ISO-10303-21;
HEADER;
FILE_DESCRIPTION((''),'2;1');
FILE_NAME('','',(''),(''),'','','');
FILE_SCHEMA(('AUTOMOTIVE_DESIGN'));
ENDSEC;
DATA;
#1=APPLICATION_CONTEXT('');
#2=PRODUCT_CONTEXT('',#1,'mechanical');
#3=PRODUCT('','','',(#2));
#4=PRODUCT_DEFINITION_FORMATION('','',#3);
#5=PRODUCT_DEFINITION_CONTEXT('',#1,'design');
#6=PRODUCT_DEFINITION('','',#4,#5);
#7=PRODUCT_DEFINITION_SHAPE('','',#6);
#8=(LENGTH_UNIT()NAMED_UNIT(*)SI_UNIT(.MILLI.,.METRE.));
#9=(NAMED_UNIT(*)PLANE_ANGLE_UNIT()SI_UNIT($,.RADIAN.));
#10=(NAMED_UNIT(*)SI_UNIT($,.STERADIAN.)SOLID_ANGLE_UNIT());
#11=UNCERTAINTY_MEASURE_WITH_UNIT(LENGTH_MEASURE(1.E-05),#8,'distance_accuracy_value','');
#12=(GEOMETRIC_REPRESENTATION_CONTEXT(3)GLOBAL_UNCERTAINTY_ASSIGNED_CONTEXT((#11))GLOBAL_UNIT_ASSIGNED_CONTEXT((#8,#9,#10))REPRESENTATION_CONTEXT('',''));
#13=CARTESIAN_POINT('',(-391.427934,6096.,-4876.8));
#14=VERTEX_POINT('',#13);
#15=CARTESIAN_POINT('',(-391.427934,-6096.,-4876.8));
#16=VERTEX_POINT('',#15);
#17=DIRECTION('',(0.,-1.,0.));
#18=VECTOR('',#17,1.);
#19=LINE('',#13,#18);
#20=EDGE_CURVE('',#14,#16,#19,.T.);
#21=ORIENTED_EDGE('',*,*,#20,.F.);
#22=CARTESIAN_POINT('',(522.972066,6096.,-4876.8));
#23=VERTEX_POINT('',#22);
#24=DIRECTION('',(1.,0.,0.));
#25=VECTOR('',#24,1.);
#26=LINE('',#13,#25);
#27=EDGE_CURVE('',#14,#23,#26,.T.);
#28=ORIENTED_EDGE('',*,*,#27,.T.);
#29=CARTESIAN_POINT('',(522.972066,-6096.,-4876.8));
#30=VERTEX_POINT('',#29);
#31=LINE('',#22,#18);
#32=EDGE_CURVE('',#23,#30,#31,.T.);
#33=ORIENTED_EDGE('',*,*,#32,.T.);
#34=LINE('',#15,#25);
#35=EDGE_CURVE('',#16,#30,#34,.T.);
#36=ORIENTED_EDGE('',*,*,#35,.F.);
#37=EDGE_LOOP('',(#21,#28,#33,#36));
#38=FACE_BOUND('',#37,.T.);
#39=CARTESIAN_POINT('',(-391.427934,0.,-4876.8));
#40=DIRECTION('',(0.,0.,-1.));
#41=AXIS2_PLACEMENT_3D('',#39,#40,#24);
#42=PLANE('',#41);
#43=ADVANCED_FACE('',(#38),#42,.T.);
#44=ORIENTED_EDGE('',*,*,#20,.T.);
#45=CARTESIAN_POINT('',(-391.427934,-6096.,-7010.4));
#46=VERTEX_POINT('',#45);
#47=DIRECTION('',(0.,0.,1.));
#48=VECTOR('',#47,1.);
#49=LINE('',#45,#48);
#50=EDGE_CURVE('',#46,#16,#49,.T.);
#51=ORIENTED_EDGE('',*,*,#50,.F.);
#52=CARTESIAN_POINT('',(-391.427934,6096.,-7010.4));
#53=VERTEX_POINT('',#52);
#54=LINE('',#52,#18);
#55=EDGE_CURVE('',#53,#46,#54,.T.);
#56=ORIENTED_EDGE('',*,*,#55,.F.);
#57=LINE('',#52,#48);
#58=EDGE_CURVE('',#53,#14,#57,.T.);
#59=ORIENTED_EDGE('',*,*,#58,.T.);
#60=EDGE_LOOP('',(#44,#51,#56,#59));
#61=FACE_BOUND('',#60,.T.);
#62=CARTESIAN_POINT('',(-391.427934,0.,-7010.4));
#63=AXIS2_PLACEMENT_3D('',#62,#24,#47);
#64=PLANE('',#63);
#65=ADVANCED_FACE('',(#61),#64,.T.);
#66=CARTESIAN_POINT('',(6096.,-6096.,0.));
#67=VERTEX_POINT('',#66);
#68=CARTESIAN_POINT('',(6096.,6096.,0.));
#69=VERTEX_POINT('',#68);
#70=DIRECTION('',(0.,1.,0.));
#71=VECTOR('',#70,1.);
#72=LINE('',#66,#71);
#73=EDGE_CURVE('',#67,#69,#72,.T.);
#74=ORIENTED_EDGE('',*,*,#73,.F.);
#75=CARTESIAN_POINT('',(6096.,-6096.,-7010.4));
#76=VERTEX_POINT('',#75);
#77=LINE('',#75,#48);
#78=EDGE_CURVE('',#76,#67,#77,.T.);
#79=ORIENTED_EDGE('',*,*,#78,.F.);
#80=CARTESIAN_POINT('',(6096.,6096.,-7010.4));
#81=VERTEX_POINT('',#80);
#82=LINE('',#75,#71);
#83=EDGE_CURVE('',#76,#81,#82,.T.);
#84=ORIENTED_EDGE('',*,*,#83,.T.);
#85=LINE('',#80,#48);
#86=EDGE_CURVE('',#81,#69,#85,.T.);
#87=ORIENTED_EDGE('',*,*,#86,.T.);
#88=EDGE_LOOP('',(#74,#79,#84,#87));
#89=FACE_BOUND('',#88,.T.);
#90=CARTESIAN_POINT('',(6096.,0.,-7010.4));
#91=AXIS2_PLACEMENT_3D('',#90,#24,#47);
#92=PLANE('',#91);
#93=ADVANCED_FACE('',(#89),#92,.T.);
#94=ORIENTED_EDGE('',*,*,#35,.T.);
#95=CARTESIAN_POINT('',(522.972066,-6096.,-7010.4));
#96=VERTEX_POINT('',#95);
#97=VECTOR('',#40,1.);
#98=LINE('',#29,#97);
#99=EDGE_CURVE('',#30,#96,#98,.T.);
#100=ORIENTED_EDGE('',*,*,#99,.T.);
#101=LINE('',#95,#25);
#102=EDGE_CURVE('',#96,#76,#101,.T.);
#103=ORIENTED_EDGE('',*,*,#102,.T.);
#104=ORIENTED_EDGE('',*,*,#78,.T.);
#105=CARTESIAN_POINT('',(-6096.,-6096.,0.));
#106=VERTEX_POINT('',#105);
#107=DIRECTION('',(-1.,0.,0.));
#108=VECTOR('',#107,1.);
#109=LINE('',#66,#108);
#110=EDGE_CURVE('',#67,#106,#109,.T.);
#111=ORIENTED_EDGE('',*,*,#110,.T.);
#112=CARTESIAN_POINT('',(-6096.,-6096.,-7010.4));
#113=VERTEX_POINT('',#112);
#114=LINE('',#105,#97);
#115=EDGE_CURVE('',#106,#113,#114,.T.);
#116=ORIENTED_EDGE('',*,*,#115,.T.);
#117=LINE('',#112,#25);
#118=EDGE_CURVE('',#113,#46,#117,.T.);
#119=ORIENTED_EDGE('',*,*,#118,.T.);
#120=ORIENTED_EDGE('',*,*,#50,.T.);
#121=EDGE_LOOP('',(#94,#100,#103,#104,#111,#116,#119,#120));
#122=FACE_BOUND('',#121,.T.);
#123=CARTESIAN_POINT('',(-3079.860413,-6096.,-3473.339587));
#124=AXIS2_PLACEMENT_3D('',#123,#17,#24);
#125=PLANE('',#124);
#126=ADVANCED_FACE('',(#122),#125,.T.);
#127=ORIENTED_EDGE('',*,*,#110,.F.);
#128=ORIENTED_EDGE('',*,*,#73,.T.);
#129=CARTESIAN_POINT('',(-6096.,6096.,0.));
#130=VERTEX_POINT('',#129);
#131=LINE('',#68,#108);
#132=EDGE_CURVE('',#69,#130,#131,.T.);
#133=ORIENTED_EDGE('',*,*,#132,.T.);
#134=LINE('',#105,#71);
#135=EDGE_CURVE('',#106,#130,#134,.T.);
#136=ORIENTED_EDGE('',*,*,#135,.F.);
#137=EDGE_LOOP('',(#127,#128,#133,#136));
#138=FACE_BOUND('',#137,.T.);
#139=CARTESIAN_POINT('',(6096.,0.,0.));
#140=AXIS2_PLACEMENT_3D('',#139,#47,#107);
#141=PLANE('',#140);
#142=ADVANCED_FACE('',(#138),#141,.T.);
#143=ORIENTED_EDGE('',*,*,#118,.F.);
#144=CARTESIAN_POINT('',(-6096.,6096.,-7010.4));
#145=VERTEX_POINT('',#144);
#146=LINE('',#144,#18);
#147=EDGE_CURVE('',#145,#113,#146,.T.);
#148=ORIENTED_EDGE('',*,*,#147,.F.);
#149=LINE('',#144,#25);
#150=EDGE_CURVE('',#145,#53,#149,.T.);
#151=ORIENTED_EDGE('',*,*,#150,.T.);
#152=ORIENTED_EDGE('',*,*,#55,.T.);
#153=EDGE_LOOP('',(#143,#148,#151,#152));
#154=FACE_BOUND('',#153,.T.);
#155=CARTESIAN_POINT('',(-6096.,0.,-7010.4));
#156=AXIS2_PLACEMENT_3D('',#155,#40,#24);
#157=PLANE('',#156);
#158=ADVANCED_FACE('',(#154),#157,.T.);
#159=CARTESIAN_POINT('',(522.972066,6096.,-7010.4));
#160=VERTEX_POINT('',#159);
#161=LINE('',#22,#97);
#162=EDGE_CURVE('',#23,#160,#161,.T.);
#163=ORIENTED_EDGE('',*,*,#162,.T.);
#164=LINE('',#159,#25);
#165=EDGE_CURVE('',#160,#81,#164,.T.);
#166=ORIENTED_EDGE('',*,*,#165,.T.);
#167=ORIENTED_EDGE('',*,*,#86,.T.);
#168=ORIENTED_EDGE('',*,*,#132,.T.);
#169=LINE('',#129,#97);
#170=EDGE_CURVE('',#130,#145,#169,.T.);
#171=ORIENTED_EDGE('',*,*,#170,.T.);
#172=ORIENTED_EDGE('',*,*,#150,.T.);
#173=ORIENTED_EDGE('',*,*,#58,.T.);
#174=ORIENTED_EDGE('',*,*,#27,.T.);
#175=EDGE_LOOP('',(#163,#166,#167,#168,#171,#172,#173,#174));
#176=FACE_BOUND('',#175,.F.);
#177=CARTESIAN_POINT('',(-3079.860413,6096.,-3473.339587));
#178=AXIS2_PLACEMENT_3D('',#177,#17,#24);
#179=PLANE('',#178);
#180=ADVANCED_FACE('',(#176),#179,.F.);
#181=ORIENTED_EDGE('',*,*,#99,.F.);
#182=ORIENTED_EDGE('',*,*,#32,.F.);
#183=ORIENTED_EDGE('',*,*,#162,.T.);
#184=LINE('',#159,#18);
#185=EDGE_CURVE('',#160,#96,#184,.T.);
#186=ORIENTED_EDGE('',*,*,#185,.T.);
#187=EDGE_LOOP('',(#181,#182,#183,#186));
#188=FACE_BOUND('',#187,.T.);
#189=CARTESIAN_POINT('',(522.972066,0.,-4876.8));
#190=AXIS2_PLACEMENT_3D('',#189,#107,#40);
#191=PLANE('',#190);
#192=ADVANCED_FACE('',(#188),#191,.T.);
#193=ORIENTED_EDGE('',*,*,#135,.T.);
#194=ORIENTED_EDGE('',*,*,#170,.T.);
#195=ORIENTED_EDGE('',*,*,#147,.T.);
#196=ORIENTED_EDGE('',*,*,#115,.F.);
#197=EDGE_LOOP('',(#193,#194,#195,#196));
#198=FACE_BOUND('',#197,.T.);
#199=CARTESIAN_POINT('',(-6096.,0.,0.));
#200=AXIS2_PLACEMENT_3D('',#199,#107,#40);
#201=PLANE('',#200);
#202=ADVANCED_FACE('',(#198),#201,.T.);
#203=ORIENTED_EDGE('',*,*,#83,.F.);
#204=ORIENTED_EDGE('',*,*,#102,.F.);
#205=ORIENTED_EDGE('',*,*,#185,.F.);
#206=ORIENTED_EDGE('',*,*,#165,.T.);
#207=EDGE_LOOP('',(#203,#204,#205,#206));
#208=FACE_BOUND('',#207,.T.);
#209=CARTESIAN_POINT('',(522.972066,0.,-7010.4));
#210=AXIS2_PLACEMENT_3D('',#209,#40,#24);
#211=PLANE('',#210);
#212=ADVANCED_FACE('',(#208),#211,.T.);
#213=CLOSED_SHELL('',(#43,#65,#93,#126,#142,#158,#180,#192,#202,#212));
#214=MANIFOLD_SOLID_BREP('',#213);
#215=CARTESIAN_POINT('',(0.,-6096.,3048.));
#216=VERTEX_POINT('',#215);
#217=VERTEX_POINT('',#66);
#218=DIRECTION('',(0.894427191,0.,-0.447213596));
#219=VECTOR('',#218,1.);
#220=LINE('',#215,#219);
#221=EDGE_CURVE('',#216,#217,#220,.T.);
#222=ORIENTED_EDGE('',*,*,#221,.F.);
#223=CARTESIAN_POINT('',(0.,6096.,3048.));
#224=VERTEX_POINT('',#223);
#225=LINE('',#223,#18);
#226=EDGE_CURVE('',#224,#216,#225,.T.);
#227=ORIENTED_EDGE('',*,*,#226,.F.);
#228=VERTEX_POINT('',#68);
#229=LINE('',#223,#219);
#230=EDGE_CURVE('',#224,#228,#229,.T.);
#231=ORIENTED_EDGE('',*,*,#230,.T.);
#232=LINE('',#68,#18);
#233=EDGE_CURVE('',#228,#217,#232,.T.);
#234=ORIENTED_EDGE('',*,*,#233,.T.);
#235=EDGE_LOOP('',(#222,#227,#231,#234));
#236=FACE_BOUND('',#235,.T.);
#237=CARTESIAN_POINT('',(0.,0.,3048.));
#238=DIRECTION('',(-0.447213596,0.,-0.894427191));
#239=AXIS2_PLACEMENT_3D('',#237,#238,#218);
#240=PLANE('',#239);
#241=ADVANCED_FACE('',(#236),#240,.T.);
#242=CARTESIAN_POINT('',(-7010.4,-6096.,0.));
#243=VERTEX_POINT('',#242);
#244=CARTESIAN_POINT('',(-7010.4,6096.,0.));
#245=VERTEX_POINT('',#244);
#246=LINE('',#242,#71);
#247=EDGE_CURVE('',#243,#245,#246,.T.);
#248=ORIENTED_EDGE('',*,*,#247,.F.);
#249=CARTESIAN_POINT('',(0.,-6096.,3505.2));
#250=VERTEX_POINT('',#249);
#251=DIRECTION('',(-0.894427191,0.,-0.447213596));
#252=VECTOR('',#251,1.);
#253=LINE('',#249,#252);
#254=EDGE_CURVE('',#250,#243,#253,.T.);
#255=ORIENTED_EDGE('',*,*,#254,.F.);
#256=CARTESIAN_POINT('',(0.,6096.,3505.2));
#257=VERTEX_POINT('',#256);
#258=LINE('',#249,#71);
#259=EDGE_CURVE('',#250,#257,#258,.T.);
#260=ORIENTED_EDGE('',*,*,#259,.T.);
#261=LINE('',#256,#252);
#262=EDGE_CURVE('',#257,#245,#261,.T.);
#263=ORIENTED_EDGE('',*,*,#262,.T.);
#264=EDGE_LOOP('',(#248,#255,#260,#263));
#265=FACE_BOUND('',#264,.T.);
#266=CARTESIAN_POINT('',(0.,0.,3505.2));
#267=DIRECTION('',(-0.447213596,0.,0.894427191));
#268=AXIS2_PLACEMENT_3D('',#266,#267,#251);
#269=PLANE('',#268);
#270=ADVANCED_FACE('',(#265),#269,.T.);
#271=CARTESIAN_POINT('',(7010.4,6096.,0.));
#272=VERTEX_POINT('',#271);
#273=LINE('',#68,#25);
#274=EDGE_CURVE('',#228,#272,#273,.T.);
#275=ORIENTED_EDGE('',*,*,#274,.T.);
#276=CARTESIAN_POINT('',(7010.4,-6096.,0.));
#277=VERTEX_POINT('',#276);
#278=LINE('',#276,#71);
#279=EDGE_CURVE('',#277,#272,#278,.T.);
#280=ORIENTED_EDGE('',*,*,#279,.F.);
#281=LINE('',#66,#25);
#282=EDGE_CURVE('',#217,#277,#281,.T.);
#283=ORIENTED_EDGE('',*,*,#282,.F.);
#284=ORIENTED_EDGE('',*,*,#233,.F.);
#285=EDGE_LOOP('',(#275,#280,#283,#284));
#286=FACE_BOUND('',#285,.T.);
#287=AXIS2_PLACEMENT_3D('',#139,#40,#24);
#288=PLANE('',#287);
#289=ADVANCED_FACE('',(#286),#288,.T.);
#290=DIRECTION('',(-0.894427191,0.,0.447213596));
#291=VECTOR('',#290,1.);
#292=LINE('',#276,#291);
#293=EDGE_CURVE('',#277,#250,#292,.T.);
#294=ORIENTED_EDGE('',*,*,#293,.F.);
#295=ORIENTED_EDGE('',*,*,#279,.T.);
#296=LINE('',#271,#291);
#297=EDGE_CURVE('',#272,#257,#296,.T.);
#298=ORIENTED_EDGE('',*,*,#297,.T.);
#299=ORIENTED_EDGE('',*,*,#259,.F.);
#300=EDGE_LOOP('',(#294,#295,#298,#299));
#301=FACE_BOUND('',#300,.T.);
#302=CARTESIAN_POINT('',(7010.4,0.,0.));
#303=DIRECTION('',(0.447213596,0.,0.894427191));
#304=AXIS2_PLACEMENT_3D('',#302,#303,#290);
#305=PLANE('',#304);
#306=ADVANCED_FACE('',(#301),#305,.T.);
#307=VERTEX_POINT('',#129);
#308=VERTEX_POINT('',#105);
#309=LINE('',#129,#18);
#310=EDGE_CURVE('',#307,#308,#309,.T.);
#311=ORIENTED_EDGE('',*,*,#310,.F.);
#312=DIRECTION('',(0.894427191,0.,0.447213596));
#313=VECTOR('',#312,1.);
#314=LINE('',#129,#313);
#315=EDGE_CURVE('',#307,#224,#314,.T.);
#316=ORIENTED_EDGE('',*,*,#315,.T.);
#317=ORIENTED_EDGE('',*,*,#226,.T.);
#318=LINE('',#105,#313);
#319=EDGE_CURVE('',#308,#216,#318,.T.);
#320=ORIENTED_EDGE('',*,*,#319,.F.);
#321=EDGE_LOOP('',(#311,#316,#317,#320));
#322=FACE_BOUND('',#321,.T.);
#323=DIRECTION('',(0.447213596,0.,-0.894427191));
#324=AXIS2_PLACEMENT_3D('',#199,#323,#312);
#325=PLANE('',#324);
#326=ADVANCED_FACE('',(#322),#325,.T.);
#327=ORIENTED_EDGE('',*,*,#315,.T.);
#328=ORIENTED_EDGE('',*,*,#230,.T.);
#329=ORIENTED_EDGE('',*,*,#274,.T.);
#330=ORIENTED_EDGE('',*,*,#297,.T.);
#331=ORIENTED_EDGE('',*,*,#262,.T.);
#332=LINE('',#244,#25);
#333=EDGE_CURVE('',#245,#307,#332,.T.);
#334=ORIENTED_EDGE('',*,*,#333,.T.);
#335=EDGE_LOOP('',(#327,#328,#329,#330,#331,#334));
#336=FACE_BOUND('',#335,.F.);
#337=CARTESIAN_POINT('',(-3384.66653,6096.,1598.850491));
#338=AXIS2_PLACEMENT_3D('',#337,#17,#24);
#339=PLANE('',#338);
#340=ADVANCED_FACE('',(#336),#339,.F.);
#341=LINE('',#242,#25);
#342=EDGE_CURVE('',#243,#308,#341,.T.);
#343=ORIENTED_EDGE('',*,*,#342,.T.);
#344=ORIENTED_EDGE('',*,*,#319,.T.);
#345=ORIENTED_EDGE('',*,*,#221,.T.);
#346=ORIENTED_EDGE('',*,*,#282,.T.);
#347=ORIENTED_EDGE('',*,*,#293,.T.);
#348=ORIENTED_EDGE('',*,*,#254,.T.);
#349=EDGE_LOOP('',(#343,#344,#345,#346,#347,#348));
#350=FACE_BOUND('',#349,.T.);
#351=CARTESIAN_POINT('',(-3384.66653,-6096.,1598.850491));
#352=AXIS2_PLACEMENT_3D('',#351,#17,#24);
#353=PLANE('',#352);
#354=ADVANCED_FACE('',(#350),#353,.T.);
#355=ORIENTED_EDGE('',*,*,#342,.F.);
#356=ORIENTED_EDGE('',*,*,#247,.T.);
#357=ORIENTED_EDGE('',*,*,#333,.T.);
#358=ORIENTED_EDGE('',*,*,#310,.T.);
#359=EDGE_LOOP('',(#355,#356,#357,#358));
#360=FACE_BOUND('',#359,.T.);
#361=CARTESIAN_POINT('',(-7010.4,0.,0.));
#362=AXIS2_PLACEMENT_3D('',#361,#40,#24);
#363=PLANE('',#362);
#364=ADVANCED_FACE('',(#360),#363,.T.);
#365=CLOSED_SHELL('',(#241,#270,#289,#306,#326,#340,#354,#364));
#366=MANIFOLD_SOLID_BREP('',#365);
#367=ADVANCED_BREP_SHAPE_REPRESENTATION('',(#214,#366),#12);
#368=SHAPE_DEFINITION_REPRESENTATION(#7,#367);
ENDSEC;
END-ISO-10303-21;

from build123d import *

# Parameters (mm, degrees)
F1_DEPTH = 6096


# Not quite as in the source:
# - the program builds the solid bodies; features that only make, move or delete a surface that nothing else refers to are left out


with BuildPart() as f1:
    # F0 (on Front) → F1 (new body, symmetric)
    with BuildSketch(Plane.XZ):
        Polygon((-7010.4, 0), (-6096, 0), (0, 3048), (0, 3505.2), align=None)
        Polygon((0, 3048), (6096, 0), (7010.4, 0), (0, 3505.2), align=None)
    extrude(amount=F1_DEPTH, both=True)


with BuildPart() as f1b:
    # F0 (on Front) → F1, piece 2 (new body, symmetric)
    with BuildSketch(Plane.XZ):
        Polygon((0, -4876.8), (0, 0), (-6096, 0), (-6096, -7010.4), (-391.4279341698, -7010.4), (-391.4279341698, -4876.8), align=None)
        Polygon((6096, 0), (0, 0), (0, -4876.8), (522.9720658302, -4876.8), (522.9720658302, -7010.4), (6096, -7010.4), align=None)
    extrude(amount=F1_DEPTH, both=True)


solid = Compound([f1.part, f1b.part])
